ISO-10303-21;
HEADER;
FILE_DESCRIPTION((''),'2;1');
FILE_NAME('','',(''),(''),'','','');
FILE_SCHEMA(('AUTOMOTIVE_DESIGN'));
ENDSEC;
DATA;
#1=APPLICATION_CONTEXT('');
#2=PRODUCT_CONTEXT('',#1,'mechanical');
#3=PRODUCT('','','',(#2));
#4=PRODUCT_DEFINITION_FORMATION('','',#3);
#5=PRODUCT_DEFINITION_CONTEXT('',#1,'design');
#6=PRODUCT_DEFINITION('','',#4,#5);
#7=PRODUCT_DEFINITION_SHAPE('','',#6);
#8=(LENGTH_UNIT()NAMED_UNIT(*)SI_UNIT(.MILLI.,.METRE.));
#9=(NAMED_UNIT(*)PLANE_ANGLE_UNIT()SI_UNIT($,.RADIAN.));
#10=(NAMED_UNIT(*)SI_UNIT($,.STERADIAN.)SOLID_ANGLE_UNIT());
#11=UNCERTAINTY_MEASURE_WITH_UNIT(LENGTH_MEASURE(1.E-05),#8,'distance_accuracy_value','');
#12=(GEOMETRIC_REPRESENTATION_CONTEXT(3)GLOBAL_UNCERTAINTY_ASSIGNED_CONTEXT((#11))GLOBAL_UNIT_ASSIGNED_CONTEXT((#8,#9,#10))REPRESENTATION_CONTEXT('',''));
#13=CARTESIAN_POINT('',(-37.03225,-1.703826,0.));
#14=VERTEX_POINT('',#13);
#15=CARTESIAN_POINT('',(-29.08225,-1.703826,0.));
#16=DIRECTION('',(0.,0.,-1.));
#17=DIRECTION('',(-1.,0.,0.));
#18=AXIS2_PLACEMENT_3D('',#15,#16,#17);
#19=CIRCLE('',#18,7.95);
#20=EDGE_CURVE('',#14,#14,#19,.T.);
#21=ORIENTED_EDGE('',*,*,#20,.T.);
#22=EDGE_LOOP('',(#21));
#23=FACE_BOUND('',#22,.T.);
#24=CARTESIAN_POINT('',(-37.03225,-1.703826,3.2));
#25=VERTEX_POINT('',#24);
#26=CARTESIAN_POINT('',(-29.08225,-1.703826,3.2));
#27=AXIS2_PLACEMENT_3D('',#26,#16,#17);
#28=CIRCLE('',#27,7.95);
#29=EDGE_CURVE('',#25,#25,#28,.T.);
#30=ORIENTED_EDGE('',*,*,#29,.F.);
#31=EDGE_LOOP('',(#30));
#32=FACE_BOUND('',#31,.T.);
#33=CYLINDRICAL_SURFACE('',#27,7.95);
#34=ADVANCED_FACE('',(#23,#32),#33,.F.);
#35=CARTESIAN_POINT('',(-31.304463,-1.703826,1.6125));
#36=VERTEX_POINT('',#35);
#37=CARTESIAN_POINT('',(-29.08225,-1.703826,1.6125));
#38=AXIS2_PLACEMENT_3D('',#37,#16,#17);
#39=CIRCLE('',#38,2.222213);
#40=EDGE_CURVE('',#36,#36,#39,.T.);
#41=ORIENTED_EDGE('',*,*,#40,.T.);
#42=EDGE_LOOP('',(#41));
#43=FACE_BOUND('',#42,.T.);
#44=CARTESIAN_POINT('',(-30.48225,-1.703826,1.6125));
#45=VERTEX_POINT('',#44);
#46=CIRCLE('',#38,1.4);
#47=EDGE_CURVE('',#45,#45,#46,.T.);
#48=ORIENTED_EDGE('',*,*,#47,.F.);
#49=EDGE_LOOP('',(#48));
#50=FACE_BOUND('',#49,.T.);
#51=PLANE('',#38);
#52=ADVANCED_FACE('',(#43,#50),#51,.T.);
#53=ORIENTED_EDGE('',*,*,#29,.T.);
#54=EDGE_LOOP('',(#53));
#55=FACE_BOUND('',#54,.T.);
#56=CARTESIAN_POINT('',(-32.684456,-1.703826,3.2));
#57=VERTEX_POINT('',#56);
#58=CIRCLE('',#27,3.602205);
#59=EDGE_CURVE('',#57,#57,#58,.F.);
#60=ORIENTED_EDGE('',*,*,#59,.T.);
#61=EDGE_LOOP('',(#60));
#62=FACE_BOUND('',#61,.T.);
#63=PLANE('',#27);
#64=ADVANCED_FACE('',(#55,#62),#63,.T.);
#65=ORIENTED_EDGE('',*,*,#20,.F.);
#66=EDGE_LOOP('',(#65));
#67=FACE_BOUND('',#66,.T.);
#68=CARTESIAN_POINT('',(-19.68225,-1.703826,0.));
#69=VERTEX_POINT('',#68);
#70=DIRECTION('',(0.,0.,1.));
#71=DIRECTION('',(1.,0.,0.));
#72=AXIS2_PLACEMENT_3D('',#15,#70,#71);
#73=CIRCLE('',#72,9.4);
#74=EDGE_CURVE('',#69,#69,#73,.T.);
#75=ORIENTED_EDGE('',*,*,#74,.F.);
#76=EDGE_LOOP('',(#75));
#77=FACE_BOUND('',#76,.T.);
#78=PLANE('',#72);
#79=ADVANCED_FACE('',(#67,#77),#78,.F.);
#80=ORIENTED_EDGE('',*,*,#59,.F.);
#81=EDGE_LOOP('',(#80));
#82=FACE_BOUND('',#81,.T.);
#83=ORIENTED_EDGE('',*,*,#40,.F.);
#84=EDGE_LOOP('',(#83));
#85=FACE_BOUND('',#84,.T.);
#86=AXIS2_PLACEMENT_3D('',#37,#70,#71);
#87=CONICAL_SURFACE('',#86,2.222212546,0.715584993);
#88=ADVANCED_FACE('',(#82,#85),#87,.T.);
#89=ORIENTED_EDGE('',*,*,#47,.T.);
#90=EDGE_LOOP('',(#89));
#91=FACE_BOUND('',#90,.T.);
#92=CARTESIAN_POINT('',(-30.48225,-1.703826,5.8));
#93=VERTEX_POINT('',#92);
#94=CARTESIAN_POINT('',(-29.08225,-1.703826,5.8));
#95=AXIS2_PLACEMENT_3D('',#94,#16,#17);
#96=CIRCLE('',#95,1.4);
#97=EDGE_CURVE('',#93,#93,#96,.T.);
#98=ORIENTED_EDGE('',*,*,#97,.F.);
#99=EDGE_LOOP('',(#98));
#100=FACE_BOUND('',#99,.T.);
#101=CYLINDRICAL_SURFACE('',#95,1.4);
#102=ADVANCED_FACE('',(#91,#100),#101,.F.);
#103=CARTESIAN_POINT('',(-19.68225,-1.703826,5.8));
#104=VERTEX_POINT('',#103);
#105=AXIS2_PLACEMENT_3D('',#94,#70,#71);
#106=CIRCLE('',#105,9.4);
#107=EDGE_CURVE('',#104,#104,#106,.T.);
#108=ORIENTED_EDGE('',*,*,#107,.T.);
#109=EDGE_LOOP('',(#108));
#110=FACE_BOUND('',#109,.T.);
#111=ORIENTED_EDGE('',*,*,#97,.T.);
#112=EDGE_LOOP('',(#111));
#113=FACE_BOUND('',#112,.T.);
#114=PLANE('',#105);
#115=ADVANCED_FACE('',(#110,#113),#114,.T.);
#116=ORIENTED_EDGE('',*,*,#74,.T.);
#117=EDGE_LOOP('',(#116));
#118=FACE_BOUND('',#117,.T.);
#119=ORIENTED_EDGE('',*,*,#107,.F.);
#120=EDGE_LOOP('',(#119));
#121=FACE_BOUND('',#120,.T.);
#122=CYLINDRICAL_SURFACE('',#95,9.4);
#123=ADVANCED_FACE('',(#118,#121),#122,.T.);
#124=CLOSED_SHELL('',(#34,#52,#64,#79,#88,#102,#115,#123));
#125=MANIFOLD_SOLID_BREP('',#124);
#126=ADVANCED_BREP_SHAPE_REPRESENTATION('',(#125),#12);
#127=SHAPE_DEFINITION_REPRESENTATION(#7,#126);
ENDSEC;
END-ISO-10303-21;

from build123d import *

# Parameters (mm, degrees)
SKETCH1_R           = 9.4
BOSS_EXTRUDE1_DEPTH = 5.8
SKETCH2_R           = 7.95
CUT_EXTRUDE1_DEPTH  = 3.2
SKETCH3_R           = 1
BOSS_EXTRUDE2_DEPTH = 1.5875
SKETCH4_R           = 3.7
BOSS_EXTRUDE3_DEPTH = 3
SKETCH5_R           = 1.4
CUT_EXTRUDE2_DEPTH  = 41.270506735
CHAMFER2_SIZE       = 1.477787454
CHAMFER2_SIZE_2     = 1.7


with BuildPart() as part:
    # Sketch1 → Boss-Extrude1 (new body)
    with BuildSketch(Plane.XY):
        with Locations((-29.082250471, -1.703826149)):
            Circle(SKETCH1_R)
    extrude(amount=BOSS_EXTRUDE1_DEPTH)

    # Sketch2 → Cut-Extrude1 (cut)
    with BuildSketch(Plane(origin=(0, 0, 0), x_dir=(-1, 0, 0), z_dir=(0, 0, -1))):
        with Locations((29.082250471, -1.703826149)):
            Circle(SKETCH2_R)
    extrude(amount=-CUT_EXTRUDE1_DEPTH, mode=Mode.SUBTRACT)

    # Sketch3 → Boss-Extrude2 (add)
    with BuildSketch(Plane(origin=(0, 0, 3.2), x_dir=(-1, 0, 0), z_dir=(0, 0, -1))):
        with Locations((29.082250471, -1.703826149)):
            Circle(SKETCH3_R)
    extrude(amount=BOSS_EXTRUDE2_DEPTH)

    # Sketch4 → Boss-Extrude3 (add)
    with BuildSketch(Plane(origin=(0, 0, 1.6125), x_dir=(-1, 0, 0), z_dir=(0, 0, -1))):
        with Locations((29.082250471, -1.703826149)):
            Circle(SKETCH4_R)
    extrude(amount=-BOSS_EXTRUDE3_DEPTH)

    # Sketch5 → Cut-Extrude2 (cut, through all)
    with BuildSketch(Plane(origin=(0, 0, 1.6125), x_dir=(-1, 0, 0), z_dir=(0, 0, -1))):
        with Locations((29.082250471, -1.703826149)):
            Circle(SKETCH5_R)
    extrude(amount=-CUT_EXTRUDE2_DEPTH, mode=Mode.SUBTRACT)

    # Chamfer2
    # the kernel refuses this chamfer: 1.7, 1.477787454 mm, written as the material it takes off along each edge
    with BuildSketch(Plane(origin=(-29.082250471, -1.703826149, 1.6125), x_dir=(-1, 0, 0), z_dir=(0, -1, 0))) as chamfer2_piece_1_section:
        Polygon((3.7 - CHAMFER2_SIZE, 0), (3.7, -CHAMFER2_SIZE_2), (3.7, 0), align=None)
    chamfer2_piece_1 = revolve(axis=Axis((-29.082250471, -1.703826149, 1.6125), (0, 0, -1)), mode=Mode.PRIVATE)
    chamfer2_piece_1 = split(chamfer2_piece_1, bisect_by=Plane(origin=(-26.169502039, -1.703826149, 3.2), z_dir=(0, 0, -1)), keep=Keep.TOP, mode=Mode.PRIVATE)
    add(chamfer2_piece_1, mode=Mode.SUBTRACT)


solid = part.part
